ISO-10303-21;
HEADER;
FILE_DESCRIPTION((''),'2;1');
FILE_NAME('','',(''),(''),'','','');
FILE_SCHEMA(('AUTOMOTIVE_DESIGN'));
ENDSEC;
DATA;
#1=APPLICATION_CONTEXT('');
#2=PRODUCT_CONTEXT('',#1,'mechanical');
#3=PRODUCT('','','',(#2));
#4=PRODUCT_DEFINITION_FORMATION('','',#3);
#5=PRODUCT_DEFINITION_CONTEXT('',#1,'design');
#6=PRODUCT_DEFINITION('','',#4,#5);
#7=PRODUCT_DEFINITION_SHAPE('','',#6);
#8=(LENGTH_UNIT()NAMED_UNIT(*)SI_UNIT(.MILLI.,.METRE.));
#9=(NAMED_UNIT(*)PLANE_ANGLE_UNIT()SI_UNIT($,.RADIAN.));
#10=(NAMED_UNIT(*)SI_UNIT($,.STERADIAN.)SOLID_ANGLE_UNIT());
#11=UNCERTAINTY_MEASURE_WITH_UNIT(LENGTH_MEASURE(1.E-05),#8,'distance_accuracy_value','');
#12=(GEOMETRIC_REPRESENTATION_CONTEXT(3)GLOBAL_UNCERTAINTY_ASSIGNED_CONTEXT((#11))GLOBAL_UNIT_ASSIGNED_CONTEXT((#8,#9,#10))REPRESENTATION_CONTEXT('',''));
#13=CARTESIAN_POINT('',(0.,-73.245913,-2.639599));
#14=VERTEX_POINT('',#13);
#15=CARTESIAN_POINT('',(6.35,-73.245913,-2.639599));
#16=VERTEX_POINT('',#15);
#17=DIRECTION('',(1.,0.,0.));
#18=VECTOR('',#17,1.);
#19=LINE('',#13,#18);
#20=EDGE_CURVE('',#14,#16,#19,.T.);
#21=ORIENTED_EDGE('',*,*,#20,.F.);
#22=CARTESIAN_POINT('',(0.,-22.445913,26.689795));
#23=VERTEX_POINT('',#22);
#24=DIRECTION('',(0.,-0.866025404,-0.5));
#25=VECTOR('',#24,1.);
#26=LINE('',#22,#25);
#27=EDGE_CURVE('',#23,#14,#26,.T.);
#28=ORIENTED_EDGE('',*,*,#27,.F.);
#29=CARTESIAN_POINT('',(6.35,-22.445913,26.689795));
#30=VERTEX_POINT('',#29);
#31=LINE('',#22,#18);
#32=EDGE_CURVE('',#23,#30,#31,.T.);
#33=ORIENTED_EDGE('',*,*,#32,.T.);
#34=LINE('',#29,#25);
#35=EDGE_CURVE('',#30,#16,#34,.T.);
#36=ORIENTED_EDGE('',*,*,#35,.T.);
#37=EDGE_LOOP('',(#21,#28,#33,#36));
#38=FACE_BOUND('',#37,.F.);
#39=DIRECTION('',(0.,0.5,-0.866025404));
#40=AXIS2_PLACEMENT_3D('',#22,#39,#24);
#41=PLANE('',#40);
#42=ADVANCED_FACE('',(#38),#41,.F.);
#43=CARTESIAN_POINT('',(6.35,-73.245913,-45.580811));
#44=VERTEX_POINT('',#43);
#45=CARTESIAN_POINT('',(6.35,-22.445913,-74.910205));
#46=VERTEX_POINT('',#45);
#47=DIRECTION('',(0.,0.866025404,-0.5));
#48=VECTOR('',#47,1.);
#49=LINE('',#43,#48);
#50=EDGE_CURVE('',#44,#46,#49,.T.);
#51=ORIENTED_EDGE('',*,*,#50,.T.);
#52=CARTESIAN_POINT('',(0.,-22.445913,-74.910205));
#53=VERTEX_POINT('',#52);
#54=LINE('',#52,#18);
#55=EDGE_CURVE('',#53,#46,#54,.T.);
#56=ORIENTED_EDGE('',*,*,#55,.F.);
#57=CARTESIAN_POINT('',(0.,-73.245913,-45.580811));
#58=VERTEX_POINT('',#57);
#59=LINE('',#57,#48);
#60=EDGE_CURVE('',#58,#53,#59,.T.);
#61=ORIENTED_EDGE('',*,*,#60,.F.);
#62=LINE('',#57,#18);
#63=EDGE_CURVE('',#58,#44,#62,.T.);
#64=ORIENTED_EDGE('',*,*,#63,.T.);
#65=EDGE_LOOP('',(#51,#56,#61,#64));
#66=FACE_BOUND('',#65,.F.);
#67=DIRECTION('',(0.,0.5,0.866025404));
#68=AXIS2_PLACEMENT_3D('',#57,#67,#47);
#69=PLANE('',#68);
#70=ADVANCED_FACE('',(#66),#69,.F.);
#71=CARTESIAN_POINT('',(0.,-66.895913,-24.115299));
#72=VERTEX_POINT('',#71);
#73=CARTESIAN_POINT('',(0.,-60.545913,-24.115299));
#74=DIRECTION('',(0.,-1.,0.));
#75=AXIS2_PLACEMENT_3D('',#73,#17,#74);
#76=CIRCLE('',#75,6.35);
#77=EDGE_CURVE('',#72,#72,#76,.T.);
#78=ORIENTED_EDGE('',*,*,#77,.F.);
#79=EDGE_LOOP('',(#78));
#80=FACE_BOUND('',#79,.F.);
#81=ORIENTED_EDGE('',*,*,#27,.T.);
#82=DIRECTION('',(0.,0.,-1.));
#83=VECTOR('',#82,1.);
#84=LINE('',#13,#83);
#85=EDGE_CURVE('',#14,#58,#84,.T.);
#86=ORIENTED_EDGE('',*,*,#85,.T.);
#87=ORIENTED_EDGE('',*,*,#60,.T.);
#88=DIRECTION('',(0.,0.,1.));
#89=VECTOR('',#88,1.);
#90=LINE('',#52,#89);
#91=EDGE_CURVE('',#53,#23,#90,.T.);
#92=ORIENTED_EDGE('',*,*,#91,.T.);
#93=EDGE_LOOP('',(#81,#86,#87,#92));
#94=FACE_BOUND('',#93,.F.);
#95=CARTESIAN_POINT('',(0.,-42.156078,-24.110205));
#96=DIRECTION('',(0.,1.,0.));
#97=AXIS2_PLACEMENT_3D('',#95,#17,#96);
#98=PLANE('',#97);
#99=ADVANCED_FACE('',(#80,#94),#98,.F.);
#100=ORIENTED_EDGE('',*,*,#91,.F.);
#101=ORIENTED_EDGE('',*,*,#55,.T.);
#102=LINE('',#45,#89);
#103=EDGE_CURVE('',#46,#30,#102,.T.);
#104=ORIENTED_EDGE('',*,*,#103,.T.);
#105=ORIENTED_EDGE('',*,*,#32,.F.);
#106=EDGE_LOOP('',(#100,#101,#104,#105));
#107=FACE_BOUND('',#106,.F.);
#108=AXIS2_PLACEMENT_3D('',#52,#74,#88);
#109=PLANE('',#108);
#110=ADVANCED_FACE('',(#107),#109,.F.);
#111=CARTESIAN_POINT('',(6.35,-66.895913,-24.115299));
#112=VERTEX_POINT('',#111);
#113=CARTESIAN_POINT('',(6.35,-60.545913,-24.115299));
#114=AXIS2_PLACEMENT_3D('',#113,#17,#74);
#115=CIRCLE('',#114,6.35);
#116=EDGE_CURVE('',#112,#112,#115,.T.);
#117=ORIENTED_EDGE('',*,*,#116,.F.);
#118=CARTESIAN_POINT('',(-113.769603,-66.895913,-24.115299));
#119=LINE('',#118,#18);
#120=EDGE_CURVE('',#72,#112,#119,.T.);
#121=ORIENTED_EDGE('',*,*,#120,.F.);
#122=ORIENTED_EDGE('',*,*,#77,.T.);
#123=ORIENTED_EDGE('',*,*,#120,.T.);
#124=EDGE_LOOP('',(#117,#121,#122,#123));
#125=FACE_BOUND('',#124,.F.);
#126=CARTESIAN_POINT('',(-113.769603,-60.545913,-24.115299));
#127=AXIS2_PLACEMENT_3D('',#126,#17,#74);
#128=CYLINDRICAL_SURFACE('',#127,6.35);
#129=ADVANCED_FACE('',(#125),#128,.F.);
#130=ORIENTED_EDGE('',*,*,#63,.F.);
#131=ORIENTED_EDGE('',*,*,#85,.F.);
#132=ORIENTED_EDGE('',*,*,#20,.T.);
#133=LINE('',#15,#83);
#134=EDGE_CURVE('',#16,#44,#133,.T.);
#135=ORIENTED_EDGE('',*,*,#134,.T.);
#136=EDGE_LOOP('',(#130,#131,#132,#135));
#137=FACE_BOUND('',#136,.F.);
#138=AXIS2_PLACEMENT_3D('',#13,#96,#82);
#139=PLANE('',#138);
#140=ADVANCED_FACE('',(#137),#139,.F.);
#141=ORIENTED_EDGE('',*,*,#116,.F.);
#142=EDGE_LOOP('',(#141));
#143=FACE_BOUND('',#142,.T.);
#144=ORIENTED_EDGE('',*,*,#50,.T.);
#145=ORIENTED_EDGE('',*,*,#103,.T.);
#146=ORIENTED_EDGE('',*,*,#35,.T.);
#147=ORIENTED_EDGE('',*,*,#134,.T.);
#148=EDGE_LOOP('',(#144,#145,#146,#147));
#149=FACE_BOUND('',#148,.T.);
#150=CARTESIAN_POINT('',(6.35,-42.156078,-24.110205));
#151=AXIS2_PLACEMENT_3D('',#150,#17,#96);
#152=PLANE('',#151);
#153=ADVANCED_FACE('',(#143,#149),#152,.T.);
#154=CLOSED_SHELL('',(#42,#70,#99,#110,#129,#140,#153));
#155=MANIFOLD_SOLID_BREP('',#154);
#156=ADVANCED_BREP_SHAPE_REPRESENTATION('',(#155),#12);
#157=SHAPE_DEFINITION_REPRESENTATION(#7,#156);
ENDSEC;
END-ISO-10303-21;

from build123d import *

# Parameters (mm, degrees)
F1_DEPTH = 6.35
F2_D     = 12.7


# Not quite as in the source:
# - a feature names something its author has since deleted; it is built from what else it names


with BuildPart() as f1:
    # F0 (on Right) → F1 (new body)
    with BuildSketch(Plane.YZ):
        Polygon((-73.2459126534, -2.6395988316), (-73.2459126534, -45.580811482), (-22.4459126534, -74.9102051568), (-22.4459126534, 26.6897948432), align=None)
    extrude(amount=F1_DEPTH)

    # F2 (through all)
    with Locations(Plane(origin=(0, 0, 0), x_dir=(0, 1, 0), z_dir=(-1, 0, 0))):
        with Locations((-60.5459126534, 24.1152988316)):
            Hole(F2_D / 2)


solid = f1.part
